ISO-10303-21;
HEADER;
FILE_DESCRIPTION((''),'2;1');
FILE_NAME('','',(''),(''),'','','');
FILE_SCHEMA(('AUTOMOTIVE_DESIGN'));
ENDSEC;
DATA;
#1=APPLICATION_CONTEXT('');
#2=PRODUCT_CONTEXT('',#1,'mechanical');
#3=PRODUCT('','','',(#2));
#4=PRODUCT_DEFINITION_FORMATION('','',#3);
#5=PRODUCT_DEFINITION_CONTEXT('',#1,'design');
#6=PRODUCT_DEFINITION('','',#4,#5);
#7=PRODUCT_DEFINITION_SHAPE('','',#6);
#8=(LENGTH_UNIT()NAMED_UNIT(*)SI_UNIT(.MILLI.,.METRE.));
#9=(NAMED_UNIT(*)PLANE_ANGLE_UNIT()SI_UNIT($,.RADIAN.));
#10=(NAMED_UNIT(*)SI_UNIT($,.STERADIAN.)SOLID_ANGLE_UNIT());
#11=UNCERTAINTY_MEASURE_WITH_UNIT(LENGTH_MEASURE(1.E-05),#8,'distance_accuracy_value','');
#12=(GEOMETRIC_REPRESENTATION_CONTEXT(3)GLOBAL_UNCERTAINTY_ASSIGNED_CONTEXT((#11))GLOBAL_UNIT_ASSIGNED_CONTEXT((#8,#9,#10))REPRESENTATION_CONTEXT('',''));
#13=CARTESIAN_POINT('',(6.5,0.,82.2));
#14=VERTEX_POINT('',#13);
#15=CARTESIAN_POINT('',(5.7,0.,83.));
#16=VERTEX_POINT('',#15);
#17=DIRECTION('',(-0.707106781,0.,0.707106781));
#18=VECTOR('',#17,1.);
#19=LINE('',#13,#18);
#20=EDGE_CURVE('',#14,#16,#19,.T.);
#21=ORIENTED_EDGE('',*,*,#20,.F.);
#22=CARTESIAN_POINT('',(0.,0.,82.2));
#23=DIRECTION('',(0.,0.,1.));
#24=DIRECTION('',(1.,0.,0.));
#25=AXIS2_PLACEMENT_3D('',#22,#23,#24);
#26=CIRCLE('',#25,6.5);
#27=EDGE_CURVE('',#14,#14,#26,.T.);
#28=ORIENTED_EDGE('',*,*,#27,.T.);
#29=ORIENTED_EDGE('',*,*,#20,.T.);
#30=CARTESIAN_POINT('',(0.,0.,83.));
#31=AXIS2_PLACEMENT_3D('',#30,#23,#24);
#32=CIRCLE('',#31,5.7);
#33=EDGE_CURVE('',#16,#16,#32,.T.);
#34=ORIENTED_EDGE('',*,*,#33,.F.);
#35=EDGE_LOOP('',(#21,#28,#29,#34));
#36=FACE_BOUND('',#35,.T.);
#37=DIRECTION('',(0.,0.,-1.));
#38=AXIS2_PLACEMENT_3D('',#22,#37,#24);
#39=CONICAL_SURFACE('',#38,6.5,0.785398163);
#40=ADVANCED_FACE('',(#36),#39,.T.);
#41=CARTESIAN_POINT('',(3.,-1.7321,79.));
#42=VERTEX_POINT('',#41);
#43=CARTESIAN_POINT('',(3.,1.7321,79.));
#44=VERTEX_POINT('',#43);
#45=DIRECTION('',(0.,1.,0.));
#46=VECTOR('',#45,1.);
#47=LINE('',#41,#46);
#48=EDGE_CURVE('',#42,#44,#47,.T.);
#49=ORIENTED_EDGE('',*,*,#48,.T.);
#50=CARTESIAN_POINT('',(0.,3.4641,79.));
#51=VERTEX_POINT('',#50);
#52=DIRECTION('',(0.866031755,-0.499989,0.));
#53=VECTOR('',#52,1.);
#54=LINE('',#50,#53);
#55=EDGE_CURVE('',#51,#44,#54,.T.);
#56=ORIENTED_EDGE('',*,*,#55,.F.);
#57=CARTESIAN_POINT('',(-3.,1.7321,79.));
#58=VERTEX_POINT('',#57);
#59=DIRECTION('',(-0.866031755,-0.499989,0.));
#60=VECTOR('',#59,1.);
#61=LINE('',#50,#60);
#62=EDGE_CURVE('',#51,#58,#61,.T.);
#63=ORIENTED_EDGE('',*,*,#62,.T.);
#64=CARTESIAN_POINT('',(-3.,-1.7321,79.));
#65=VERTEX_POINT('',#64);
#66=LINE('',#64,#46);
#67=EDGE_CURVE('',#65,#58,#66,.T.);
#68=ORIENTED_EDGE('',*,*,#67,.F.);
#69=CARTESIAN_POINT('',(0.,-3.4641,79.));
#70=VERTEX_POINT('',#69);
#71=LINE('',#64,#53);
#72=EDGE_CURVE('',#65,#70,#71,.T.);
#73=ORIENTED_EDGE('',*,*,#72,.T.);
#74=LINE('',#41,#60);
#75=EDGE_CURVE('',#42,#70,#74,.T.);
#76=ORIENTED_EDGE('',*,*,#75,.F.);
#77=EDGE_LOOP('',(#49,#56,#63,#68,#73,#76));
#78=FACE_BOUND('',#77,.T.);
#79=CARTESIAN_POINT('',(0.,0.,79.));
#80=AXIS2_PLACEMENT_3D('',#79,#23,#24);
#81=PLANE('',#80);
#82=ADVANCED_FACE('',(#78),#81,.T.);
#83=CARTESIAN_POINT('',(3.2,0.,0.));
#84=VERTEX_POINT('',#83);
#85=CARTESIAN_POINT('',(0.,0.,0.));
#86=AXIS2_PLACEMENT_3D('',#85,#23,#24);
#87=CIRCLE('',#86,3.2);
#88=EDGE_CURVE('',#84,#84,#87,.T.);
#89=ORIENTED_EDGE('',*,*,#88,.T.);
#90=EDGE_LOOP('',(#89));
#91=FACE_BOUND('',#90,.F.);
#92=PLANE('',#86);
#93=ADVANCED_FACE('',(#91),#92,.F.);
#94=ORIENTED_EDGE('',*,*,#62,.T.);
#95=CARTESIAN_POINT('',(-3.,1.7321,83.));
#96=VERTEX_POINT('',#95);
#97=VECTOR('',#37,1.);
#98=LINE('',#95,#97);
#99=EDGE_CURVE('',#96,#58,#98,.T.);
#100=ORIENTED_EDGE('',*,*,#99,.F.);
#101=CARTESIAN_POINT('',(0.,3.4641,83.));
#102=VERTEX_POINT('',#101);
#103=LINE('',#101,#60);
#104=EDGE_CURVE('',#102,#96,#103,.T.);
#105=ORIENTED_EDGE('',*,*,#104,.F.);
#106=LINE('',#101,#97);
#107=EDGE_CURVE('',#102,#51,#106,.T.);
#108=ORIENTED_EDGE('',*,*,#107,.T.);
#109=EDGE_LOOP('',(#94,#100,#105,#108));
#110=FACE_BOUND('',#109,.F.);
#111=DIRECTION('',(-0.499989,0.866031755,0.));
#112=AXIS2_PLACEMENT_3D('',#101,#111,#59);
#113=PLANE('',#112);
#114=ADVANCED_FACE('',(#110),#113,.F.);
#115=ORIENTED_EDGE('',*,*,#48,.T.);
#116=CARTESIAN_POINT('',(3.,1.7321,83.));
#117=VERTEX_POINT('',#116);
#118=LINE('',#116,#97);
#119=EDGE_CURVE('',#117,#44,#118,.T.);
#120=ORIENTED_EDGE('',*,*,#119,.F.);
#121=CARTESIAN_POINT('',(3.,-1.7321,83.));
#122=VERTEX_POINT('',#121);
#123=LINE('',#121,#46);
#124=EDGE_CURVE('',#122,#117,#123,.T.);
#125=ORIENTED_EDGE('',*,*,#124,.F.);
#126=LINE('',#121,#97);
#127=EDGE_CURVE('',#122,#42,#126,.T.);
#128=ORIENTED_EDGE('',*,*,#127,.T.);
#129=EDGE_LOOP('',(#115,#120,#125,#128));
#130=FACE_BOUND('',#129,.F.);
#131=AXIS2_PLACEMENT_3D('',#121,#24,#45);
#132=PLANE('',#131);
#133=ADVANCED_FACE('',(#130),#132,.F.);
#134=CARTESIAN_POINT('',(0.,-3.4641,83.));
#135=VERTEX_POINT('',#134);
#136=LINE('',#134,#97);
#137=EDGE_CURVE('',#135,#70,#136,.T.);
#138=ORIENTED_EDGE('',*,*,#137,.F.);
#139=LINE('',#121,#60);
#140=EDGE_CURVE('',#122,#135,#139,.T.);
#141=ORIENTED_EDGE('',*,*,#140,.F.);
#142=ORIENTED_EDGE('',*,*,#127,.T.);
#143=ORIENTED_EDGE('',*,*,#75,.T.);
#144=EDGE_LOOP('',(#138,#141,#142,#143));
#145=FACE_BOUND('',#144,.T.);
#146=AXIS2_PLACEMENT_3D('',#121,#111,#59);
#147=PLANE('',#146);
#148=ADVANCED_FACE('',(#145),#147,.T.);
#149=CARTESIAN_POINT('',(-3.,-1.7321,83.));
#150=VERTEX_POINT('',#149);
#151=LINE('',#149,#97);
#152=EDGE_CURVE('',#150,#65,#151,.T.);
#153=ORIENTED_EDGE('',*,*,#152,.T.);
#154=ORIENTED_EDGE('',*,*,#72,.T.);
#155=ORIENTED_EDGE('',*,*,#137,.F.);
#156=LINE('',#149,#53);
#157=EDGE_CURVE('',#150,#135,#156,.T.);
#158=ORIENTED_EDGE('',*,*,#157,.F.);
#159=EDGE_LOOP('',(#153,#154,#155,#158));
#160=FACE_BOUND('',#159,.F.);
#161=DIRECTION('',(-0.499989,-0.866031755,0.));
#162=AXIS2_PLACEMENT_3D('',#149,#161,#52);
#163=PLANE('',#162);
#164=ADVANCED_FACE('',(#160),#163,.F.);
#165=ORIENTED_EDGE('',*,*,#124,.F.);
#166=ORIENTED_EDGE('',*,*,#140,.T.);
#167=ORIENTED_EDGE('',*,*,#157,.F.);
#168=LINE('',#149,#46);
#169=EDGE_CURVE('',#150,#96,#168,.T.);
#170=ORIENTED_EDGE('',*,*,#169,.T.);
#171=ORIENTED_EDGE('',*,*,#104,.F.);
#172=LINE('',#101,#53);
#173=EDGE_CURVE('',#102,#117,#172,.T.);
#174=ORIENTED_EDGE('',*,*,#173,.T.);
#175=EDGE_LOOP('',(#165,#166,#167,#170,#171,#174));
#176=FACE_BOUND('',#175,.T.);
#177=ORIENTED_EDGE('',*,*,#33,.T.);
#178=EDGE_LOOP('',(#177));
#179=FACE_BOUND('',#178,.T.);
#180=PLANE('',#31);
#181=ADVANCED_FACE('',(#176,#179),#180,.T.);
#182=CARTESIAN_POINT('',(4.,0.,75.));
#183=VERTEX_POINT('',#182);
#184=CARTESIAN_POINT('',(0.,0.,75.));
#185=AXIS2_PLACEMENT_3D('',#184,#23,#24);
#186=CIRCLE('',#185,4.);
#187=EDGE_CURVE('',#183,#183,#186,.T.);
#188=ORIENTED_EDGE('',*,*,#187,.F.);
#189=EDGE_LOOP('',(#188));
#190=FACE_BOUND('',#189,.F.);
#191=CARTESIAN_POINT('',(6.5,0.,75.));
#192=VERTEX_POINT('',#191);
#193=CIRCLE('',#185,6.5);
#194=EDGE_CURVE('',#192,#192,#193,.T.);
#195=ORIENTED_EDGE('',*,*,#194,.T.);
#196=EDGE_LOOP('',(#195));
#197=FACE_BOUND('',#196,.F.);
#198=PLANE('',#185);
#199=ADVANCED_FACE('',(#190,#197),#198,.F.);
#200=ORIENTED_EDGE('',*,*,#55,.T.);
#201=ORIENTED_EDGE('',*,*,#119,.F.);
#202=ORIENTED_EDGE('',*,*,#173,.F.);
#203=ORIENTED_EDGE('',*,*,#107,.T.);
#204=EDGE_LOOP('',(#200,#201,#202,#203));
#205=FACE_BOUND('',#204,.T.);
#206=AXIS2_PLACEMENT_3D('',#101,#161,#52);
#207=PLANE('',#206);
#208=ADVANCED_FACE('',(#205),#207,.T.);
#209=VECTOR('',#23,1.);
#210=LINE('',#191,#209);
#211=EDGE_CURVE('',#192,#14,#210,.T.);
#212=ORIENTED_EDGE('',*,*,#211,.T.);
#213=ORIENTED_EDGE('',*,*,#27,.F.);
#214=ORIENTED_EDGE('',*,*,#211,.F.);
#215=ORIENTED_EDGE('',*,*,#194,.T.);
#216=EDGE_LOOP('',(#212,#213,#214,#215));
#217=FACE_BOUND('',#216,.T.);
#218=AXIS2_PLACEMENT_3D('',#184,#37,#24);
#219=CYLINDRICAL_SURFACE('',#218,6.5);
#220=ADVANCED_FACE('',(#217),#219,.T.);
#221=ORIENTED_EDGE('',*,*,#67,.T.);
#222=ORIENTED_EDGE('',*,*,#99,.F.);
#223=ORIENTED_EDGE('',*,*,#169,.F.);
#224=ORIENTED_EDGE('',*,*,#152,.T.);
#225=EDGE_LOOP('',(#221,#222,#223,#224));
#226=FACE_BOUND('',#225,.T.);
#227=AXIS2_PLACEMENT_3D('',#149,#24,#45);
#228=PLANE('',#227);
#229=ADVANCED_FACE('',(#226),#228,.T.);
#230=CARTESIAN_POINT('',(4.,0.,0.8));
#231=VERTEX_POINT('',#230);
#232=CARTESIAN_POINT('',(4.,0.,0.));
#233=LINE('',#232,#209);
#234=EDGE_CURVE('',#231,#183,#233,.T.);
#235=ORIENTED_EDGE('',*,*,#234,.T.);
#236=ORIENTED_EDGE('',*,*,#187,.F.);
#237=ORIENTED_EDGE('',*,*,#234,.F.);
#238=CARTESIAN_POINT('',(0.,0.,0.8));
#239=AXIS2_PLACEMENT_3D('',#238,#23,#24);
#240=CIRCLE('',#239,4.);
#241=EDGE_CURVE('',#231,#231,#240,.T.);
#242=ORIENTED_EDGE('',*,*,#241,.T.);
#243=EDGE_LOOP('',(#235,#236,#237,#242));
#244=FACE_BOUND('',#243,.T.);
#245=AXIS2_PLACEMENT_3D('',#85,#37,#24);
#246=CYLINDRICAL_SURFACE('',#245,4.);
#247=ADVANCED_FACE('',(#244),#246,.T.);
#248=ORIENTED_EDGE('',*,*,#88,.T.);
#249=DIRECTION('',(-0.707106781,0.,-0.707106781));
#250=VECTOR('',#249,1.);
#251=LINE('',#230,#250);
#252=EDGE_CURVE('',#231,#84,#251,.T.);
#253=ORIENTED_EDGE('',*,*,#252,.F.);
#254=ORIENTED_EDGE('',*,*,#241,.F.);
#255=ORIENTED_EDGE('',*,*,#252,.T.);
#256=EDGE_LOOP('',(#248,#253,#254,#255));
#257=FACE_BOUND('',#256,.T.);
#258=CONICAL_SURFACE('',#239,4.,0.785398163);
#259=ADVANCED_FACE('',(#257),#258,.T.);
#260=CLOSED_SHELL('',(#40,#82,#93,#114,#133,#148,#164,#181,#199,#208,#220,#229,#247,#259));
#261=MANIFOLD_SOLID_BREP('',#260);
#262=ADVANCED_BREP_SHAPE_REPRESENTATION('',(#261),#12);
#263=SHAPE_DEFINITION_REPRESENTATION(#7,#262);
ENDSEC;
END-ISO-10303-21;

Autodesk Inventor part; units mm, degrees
ref_plane "YZ Plane" through (0, 0, 0) normal (1, 0, 0) x (0, 1, 0)
ref_plane "XZ Plane" through (0, 0, 0) normal (0, 1, 0) x (-1, 0, 0)
ref_plane "XY Plane" through (0, 0, 0) normal (0, 0, 1) x (1, 0, 0)
sketch "Sketch1" plane through (0, 0, 0) normal (0, 0, 1) x (1, 0, 0)
  circle A0 centre (0, 0) radius 4
  dimension "Diameter" = 8
extrude "Extrusion1" add sketch "Sketch1" along normal blind 75
sketch "Sketch2" plane through (0, 0, 75) normal (0, 0, 1) x (1, 0, 0)
  circle A0 centre (0, 0) radius 4 projected
  circle A1 centre (0, 0) radius 6.5
  dimension "Head_Diameter" = 13
extrude "Extrusion2" add sketch "Sketch2" along normal blind 8 contours A0 | A1
sketch "Sketch3" plane through (0, 0, 83) normal (0, 0, 1) x (1, 0, 0)
  circle A0 centre (0, 0) radius 6.5 projected
  circle A1 centre (0, 0) radius 3.4641 construction
  line L0 (0, 3.4641) -> (3, 1.7321)
  line L1 (3, -1.7321) -> (3, 1.7321)
  line L2 (0, 3.4641) -> (-3, 1.7321)
  line L3 (-3, -1.7321) -> (-3, 1.7321)
  line L4 (-3, -1.7321) -> (0, -3.4641)
  line L5 (3, -1.7321) -> (0, -3.4641)
  dimension "Hex_Width" = 6
extrude "Extrusion3" cut sketch "Sketch3" against normal blind 4 contours L0 L1 L5 L4 L3 L2
thread "Thread1" size "M8x1.25" class "4g6g" standard "ANSI Metric M Profile" length 28
chamfer "Chamfer1" distance 0.8 angle 45 2 edges at (-6.5, 0, 83) (-4, 0, 0)
equation "\"d9\" = ThreadLength"
equation "\"d12\" = Chamfer"
equation "\"ThreadLength\" = 28"
equation "\"Chamfer\" = 0.8"
properties part number "SCREW, SOCKET HD, P, 12_9, M8X1_25X75MM" material "Steel, MS"
